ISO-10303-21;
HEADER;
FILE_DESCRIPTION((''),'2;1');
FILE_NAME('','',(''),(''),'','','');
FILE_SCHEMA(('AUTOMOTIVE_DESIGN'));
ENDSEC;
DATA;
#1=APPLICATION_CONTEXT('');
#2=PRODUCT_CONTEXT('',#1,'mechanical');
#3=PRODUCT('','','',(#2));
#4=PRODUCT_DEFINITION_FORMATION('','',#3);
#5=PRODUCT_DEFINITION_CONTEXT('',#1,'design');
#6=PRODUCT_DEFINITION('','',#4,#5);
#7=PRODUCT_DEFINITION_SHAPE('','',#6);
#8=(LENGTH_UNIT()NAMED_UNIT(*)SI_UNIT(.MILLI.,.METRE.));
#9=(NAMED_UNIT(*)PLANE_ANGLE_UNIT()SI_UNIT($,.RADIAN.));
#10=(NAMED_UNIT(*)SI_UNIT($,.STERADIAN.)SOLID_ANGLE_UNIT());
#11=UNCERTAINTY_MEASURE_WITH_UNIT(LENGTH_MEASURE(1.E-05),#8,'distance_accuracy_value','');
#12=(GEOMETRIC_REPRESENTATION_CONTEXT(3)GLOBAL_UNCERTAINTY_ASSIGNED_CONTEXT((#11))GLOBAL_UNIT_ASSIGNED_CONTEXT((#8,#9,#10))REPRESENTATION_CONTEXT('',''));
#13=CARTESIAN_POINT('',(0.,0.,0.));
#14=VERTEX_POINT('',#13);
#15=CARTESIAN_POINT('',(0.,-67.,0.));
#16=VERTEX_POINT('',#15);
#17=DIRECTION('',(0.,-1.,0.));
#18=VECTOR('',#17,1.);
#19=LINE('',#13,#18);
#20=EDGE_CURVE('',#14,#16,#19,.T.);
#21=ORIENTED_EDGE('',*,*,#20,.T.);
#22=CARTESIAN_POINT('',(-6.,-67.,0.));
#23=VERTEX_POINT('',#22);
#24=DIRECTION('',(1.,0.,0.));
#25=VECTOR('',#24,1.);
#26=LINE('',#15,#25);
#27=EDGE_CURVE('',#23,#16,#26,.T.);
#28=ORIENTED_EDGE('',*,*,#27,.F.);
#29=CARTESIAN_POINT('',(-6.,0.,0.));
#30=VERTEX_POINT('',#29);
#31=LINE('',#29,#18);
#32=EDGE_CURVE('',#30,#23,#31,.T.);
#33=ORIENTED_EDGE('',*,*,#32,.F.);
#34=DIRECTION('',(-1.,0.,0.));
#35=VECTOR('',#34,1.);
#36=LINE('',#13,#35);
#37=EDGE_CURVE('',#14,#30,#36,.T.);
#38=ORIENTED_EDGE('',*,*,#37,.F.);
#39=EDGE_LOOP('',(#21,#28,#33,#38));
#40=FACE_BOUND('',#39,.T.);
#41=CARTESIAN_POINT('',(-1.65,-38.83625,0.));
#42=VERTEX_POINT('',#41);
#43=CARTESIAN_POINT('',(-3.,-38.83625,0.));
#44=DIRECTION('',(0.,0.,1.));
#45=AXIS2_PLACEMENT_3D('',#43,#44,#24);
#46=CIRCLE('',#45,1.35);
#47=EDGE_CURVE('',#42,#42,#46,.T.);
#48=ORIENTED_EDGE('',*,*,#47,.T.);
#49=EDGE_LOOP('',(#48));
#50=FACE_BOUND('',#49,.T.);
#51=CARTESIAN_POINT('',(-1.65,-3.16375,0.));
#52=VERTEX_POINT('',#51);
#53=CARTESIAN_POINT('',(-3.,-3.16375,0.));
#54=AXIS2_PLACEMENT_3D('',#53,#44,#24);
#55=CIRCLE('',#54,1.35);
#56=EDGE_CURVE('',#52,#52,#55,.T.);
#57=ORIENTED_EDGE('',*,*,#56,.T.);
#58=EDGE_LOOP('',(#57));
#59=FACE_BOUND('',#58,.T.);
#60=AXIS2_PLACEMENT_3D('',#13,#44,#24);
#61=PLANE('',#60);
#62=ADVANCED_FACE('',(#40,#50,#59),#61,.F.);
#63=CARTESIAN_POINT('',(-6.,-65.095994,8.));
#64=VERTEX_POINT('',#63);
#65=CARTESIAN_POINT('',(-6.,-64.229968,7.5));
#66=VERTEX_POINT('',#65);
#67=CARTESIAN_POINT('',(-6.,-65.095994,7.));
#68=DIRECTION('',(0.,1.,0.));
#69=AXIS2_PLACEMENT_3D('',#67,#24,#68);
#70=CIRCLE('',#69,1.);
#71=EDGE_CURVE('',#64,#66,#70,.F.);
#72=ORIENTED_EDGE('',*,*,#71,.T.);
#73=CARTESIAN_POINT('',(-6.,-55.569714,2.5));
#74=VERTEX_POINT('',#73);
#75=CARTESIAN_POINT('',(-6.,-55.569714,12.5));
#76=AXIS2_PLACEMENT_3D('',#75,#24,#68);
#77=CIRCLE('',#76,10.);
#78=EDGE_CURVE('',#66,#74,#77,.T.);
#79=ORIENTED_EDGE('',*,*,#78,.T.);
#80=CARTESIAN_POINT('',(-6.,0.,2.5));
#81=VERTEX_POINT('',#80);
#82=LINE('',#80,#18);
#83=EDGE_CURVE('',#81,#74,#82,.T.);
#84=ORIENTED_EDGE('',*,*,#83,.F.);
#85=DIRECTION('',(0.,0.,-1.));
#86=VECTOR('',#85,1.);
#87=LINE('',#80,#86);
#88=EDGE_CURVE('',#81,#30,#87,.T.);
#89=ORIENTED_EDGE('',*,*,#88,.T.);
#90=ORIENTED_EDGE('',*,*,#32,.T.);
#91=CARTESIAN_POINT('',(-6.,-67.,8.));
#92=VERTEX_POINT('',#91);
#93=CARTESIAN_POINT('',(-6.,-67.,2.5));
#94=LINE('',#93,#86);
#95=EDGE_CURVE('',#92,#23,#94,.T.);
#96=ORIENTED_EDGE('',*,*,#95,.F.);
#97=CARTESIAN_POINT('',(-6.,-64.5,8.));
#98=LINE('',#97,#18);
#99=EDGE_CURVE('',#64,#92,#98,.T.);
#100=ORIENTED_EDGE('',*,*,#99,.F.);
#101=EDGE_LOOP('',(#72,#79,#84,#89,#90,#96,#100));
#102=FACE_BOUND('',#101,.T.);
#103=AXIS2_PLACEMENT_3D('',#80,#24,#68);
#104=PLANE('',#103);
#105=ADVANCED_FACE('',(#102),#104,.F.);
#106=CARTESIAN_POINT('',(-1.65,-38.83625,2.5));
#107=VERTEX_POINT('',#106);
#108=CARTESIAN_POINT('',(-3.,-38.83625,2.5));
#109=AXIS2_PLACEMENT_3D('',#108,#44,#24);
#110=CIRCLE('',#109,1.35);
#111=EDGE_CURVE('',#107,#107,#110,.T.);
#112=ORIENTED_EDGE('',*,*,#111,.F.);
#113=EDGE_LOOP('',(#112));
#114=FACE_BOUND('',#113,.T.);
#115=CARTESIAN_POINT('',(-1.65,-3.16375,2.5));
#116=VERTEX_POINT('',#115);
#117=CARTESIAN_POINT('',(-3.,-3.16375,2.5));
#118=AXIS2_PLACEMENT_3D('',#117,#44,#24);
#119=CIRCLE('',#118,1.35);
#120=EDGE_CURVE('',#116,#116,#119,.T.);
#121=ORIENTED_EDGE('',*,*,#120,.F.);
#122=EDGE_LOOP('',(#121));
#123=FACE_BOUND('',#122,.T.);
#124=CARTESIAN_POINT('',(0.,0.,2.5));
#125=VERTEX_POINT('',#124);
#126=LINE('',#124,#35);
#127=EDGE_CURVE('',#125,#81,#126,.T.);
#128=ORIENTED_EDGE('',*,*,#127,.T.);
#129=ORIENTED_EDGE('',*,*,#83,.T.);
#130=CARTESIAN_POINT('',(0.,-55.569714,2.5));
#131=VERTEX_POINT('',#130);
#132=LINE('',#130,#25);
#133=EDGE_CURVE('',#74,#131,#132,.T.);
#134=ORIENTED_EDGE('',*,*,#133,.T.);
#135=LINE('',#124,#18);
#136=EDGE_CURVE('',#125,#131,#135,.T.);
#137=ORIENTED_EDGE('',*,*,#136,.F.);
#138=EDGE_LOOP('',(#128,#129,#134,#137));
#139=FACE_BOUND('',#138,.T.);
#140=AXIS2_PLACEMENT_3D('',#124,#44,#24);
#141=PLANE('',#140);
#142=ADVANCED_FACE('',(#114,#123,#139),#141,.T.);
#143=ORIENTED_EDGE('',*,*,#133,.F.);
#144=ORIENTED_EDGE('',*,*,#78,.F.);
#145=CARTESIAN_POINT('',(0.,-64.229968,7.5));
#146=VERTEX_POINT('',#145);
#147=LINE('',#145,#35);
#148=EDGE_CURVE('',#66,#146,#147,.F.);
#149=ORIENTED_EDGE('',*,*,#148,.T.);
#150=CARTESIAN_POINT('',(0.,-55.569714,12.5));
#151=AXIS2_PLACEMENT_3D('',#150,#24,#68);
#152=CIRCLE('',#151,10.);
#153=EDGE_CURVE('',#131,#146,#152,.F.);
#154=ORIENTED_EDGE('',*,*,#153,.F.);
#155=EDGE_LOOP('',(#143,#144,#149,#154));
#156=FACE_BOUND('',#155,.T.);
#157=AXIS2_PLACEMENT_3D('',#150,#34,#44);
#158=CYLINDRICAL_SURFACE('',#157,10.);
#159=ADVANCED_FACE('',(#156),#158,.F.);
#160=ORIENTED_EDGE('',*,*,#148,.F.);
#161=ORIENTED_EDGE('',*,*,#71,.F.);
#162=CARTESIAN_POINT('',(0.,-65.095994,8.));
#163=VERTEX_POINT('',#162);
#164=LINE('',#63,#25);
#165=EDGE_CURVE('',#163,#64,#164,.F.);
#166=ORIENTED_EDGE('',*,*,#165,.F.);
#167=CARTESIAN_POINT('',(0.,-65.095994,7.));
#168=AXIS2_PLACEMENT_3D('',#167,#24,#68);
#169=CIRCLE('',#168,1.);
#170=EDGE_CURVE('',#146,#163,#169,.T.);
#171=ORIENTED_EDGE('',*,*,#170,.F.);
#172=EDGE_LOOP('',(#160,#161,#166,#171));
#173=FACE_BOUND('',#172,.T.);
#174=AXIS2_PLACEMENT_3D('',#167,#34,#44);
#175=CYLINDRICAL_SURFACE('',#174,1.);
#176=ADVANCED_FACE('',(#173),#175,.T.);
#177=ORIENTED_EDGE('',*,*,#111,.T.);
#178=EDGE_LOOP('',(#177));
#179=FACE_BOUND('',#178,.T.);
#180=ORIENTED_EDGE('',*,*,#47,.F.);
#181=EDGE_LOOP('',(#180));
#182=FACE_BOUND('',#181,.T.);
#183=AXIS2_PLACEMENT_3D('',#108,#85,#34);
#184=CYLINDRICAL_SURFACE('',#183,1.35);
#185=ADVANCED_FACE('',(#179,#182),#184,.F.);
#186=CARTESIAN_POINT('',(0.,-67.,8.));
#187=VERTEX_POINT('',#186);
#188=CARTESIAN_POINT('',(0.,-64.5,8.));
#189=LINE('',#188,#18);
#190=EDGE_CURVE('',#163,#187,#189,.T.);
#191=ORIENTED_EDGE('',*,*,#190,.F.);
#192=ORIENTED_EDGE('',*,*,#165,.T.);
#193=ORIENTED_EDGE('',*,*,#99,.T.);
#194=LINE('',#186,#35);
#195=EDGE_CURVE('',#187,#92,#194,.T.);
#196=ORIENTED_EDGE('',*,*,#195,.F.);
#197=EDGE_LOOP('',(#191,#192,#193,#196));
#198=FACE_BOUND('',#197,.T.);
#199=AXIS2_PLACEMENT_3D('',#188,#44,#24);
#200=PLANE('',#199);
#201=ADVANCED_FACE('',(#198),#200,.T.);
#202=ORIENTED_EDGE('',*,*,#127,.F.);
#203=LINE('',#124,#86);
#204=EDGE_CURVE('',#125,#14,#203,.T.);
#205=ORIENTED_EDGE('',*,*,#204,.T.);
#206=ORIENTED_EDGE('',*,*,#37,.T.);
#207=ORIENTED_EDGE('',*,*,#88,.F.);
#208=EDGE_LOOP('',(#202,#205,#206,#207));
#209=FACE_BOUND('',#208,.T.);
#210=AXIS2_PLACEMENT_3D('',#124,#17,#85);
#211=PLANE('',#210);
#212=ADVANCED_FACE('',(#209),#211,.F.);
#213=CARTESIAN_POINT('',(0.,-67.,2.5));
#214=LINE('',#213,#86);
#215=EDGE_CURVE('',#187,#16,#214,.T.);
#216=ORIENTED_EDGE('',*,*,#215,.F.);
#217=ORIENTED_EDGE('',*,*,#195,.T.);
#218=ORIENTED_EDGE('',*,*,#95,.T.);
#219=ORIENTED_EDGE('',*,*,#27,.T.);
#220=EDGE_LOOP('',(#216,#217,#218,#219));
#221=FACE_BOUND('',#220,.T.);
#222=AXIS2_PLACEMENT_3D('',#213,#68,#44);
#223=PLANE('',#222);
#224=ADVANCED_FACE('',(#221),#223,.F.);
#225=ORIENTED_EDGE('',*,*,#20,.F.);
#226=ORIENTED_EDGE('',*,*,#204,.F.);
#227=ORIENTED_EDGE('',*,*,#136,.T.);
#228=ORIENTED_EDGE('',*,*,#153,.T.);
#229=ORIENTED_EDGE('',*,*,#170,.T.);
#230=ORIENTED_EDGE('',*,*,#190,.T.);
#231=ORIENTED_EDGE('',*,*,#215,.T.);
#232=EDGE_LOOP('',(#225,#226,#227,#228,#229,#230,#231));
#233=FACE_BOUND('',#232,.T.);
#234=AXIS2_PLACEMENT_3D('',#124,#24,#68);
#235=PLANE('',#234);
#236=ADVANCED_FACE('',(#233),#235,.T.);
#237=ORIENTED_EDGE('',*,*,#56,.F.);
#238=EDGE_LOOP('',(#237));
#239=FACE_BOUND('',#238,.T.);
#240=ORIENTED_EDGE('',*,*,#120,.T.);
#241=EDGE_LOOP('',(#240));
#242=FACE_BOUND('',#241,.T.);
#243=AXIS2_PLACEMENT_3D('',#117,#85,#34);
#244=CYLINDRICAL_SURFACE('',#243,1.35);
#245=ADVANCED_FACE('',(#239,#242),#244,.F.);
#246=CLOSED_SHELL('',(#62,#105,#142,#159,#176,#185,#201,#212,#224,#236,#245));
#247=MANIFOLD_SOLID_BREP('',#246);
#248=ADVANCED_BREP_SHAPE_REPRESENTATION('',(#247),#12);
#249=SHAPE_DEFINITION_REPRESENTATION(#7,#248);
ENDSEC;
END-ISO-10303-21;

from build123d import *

# Parameters (mm, degrees)
SKICA2_W                = 6
SKICA2_H                = 42
SKICA2_R                = 1.35
SKICA2_H_2              = 25
P_IDAT_VYSUNUT_M1_DEPTH = 2.5
SKICA3_W                = 6
SKICA3_H                = 8
P_IDAT_VYSUNUT_M2_DEPTH = 2.5
ZAOBLIT1_R              = 10
ZAOBLIT2_R              = 1


with BuildPart() as part:
    # Skica2 → Přidat vysunutím1 (new body)
    # profile 1 of 2: a face of its own
    with BuildSketch(Plane.XY):
        with Locations((-3, -21)):
            Rectangle(SKICA2_W, SKICA2_H)
        with Locations((-3, -38.83625)):
            Circle(SKICA2_R, mode=Mode.SUBTRACT)
        with Locations((-3, -3.16375)):
            Circle(SKICA2_R, mode=Mode.SUBTRACT)
    # profile 2 of 2: a face of its own
    with BuildSketch(Plane.XY):
        with Locations((-3, -54.5)):
            Rectangle(SKICA2_W, SKICA2_H_2)
    extrude(amount=P_IDAT_VYSUNUT_M1_DEPTH)

    # Skica3 → Přidat vysunutím2 (add)
    with BuildSketch(Plane.XZ.offset(67)):
        with Locations((-3, 4)):
            Rectangle(SKICA3_W, SKICA3_H)
    extrude(amount=-P_IDAT_VYSUNUT_M2_DEPTH)

    # Zaoblit1
    # the kernel refuses this fillet: 10 mm, written as the material it adds along each edge
    with BuildSketch(Plane(origin=(0, -64.5, 2.5), x_dir=(0, 1, 0), z_dir=(-1, 0, 0))) as zaoblit1_piece_1:
        with BuildLine():
            CenterArc((8.93028555, -10), ZAOBLIT1_R, 90, 63.25631605)
            Line((0, -5.5), (-0.178605711, -5.41))
            ThreePointArc((-0.178605711, -5.41), (-0.2, -2.75), (-0.2, 0))
            Line((-0.2, 0), (0, 0.2))
            Line((0, 0.2), (8.93028555, 0.2))
            Line((8.93028555, 0.2), (8.93028555, 0))
        make_face()
    extrude(amount=6)

    # Zaoblit2
    zaoblit2_edges = [part.edges().sort_by_distance(p)[0] for p in [
        (-3, -64.5, 8),
    ]]
    fillet(zaoblit2_edges, radius=ZAOBLIT2_R)


solid = part.part
